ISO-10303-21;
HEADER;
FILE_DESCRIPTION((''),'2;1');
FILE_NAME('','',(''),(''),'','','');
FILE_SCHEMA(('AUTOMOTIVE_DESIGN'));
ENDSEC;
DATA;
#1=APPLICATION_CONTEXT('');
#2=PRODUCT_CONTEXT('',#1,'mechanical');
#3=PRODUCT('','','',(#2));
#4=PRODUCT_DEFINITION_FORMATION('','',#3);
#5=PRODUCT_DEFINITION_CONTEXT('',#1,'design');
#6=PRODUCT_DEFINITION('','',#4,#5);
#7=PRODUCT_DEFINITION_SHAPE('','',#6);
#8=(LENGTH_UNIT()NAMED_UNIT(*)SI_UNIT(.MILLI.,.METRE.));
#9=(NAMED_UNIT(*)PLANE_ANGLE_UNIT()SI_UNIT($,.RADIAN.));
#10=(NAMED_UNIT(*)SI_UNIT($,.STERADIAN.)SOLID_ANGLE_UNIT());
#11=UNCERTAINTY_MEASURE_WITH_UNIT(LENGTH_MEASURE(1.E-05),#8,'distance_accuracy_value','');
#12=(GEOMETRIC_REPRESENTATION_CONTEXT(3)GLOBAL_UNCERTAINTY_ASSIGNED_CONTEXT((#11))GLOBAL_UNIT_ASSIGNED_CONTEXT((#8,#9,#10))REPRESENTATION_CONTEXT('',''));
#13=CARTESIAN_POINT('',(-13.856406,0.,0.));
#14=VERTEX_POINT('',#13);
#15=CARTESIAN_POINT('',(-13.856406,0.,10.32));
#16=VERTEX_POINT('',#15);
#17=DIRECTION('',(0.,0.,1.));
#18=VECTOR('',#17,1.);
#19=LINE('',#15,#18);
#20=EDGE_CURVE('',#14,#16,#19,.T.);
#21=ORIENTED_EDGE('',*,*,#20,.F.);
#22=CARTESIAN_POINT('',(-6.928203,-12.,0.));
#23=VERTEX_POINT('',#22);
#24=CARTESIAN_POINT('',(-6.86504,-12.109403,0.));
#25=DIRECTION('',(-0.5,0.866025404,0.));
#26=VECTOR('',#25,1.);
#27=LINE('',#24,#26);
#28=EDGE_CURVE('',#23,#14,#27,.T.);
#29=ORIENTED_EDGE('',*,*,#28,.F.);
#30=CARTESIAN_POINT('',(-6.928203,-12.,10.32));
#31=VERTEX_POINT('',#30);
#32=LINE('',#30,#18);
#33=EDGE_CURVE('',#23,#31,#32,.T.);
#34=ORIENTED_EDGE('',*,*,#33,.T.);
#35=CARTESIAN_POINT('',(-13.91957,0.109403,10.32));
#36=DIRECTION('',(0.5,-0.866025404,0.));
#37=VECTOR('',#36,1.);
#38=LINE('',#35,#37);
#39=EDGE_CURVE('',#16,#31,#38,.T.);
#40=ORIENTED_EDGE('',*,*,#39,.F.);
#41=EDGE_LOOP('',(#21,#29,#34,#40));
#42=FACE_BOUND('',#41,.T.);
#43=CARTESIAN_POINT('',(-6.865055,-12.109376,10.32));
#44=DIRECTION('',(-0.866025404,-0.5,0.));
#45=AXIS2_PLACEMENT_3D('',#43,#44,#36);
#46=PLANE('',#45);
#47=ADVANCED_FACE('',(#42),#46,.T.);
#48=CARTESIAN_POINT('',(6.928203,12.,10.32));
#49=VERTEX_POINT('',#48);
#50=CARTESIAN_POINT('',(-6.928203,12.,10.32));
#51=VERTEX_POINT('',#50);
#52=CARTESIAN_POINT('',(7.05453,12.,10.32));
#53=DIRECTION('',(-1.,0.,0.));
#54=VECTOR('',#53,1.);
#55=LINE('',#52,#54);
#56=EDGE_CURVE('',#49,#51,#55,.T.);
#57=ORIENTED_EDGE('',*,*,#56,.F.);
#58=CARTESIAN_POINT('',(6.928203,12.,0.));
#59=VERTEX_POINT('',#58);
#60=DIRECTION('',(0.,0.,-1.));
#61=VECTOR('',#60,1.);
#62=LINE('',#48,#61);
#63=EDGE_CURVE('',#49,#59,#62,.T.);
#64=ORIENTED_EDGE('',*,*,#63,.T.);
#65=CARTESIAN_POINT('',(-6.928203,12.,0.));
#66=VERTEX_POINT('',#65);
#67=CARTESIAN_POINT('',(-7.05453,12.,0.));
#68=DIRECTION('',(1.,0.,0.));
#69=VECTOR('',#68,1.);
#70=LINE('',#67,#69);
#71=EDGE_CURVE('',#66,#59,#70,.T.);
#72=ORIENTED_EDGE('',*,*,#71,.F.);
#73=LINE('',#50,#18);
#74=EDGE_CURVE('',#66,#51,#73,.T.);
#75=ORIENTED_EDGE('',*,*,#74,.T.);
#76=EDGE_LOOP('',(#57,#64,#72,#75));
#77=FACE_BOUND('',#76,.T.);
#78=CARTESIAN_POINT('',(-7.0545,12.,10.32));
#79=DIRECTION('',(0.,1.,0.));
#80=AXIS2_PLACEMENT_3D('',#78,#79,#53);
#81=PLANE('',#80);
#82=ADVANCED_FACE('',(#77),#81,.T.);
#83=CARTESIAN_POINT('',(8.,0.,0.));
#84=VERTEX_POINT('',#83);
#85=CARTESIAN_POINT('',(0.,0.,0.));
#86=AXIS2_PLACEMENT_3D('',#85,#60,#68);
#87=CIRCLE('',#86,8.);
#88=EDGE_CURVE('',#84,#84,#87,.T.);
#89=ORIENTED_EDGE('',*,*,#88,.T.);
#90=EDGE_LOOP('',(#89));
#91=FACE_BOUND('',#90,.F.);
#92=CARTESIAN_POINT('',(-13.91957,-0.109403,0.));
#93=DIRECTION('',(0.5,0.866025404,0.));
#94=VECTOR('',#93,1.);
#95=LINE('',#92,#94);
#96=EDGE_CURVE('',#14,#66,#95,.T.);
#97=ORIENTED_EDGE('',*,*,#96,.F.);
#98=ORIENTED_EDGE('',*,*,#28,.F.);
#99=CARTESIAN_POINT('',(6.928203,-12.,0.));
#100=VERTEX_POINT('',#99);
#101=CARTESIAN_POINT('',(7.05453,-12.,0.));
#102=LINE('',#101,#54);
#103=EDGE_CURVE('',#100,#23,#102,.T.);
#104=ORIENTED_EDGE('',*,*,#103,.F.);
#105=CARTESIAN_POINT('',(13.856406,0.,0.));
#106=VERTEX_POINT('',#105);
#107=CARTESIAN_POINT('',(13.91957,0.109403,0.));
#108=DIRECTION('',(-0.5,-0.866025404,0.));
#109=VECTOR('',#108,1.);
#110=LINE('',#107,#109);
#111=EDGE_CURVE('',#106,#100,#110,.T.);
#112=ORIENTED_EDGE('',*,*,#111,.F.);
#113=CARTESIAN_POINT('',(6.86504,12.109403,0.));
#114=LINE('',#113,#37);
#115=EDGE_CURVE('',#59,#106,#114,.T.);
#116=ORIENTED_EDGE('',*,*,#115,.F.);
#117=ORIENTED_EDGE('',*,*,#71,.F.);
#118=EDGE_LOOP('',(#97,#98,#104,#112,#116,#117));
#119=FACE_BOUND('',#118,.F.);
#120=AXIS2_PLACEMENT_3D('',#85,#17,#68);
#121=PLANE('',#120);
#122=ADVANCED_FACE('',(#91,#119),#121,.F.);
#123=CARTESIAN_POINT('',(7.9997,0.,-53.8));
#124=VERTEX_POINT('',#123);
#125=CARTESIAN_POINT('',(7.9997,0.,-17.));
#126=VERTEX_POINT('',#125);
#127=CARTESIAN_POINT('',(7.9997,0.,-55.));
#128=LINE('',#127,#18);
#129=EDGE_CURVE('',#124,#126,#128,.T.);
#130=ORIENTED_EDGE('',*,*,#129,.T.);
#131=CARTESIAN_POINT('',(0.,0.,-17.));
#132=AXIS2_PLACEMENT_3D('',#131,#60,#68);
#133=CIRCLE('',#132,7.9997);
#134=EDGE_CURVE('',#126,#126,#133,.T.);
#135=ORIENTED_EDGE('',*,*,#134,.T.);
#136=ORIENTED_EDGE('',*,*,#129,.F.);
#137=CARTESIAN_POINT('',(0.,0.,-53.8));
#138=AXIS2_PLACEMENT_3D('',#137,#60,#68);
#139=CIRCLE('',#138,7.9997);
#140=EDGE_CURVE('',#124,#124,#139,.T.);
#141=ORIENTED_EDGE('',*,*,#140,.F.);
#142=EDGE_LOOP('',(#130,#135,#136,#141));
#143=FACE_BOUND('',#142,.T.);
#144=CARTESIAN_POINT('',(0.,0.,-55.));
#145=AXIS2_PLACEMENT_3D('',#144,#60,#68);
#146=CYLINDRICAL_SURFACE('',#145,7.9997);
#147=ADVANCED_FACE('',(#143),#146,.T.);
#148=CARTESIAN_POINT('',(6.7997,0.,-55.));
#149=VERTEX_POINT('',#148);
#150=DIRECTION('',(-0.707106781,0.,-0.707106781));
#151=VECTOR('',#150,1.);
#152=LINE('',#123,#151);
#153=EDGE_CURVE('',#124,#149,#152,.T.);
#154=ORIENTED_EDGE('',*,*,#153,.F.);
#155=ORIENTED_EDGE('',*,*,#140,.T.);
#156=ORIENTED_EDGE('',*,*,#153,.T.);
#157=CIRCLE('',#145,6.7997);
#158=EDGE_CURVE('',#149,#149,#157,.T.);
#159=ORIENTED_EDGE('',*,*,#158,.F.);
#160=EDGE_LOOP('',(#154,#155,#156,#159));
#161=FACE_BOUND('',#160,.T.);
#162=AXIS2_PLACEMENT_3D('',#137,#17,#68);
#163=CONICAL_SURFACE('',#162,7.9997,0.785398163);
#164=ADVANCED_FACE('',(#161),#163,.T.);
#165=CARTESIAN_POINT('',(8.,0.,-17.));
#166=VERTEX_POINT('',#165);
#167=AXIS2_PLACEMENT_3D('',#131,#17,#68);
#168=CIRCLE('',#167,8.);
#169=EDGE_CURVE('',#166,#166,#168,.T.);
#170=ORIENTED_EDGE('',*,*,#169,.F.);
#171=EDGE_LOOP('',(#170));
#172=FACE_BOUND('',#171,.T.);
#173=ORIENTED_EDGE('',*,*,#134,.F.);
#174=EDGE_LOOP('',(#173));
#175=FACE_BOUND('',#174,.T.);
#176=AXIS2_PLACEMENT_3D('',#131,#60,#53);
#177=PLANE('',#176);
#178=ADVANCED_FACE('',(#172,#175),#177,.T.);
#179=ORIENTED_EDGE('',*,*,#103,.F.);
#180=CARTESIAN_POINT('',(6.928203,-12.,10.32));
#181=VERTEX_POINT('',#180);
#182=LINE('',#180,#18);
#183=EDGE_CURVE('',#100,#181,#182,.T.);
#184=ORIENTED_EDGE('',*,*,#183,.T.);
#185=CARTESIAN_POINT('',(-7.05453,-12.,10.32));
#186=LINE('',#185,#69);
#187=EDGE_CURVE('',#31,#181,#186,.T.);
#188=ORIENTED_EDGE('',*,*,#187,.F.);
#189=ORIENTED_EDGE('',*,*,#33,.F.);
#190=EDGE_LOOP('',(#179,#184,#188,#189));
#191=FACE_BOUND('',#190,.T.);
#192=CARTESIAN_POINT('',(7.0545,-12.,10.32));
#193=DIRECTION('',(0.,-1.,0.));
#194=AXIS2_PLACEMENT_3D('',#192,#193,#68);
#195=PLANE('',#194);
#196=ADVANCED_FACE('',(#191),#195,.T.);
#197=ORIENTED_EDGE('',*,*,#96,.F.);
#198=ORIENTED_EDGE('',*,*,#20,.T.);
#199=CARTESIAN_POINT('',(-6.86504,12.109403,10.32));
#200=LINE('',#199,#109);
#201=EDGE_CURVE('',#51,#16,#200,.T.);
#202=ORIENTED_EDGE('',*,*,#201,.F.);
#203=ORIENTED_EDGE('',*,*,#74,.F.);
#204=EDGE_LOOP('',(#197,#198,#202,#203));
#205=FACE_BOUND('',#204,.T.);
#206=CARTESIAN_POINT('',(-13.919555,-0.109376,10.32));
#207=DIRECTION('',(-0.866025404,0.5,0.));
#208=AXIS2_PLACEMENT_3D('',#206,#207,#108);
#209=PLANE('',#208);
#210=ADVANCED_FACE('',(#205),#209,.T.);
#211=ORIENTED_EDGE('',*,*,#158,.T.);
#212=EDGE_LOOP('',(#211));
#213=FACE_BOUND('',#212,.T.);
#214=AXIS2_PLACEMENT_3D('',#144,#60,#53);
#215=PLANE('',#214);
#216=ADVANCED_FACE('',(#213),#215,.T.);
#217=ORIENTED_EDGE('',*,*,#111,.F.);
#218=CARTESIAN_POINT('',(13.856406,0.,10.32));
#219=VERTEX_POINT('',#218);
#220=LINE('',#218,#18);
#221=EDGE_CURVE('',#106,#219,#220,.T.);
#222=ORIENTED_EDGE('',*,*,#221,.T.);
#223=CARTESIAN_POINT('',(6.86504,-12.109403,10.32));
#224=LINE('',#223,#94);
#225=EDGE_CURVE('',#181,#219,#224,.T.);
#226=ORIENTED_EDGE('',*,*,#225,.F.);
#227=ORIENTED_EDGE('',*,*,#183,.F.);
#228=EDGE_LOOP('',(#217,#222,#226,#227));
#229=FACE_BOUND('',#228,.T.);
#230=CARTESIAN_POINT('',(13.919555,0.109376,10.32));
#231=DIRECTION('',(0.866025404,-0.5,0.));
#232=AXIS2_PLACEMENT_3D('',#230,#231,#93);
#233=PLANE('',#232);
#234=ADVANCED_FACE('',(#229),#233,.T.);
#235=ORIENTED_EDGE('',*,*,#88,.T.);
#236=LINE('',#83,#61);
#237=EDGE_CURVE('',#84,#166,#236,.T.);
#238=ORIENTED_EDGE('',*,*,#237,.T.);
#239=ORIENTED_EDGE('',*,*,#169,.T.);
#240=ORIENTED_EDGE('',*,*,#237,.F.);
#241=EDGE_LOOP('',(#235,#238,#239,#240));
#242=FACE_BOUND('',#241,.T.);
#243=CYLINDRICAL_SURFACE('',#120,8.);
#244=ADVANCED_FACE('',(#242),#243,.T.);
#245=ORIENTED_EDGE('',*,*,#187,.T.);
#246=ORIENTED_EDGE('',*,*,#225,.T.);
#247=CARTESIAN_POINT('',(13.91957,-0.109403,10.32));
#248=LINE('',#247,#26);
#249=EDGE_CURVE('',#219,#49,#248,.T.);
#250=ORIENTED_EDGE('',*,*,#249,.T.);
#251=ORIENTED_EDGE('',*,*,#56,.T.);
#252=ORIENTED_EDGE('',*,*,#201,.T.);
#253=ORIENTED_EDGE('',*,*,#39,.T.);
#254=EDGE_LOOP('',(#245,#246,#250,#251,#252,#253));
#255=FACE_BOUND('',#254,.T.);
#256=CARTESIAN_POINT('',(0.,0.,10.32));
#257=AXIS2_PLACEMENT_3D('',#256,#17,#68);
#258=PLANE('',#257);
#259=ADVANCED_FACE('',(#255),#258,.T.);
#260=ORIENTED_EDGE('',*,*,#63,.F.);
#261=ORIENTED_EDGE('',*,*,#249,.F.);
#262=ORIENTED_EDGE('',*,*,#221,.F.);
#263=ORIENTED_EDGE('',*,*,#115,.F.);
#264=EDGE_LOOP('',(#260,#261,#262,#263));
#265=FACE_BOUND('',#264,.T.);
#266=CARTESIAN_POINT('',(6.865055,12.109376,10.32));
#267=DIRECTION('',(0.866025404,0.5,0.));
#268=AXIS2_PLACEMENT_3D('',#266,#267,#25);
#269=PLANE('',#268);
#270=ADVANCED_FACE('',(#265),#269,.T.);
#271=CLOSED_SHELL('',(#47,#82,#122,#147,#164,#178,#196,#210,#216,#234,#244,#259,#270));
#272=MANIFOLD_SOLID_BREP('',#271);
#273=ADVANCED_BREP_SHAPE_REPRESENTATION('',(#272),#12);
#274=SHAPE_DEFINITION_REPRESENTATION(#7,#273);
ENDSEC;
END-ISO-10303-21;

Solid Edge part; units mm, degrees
sketch "Sketch1" plane through (0, 0, 0) normal (0, 0, 1) x (1, 0, 0)
  circle A0 centre (0, 0) radius 13.92
  dimension "D1" = 27.84
extrude "Protrusion1" add sketch "Sketch1" along normal blind 10.32
sketch "Sketch2" plane through (0, 0, 0) normal (0, 0, -1) x (1, 0, 0)
  circle A0 centre (0, 0) radius 8
extrude "Protrusion2" add sketch "Sketch2" along normal blind 55
sketch "Sketch3" plane through (0, 0, -55) normal (0, 0, -1) x (1, 0, 0)
  circle A0 centre (0, 0) radius 7.9997
extrude "Cutout1" cut sketch "Sketch3" against normal blind 38 flip side to cut
chamfer "Chamfer_1" distance 1.2 angle 45 1 edges at (-7.9997, 0, -55)
sketch "Sketch4" plane through (0, 0, 10.32) normal (0, 0, 1) x (1, 0, 0)
  line L0 (-7.0545, 12) -> (7.0545, 12)
  dimension "D1" = 24
extrude "Cutout2" cut sketch "Sketch4" against normal up to next material side at (0, 12.05, 10.32)
pattern_circular "Pattern1" count 6 over 360 about axis through (0, 0, 10.32) along (0, 0, 1) of "Cutout2"
properties part number "24104517"
